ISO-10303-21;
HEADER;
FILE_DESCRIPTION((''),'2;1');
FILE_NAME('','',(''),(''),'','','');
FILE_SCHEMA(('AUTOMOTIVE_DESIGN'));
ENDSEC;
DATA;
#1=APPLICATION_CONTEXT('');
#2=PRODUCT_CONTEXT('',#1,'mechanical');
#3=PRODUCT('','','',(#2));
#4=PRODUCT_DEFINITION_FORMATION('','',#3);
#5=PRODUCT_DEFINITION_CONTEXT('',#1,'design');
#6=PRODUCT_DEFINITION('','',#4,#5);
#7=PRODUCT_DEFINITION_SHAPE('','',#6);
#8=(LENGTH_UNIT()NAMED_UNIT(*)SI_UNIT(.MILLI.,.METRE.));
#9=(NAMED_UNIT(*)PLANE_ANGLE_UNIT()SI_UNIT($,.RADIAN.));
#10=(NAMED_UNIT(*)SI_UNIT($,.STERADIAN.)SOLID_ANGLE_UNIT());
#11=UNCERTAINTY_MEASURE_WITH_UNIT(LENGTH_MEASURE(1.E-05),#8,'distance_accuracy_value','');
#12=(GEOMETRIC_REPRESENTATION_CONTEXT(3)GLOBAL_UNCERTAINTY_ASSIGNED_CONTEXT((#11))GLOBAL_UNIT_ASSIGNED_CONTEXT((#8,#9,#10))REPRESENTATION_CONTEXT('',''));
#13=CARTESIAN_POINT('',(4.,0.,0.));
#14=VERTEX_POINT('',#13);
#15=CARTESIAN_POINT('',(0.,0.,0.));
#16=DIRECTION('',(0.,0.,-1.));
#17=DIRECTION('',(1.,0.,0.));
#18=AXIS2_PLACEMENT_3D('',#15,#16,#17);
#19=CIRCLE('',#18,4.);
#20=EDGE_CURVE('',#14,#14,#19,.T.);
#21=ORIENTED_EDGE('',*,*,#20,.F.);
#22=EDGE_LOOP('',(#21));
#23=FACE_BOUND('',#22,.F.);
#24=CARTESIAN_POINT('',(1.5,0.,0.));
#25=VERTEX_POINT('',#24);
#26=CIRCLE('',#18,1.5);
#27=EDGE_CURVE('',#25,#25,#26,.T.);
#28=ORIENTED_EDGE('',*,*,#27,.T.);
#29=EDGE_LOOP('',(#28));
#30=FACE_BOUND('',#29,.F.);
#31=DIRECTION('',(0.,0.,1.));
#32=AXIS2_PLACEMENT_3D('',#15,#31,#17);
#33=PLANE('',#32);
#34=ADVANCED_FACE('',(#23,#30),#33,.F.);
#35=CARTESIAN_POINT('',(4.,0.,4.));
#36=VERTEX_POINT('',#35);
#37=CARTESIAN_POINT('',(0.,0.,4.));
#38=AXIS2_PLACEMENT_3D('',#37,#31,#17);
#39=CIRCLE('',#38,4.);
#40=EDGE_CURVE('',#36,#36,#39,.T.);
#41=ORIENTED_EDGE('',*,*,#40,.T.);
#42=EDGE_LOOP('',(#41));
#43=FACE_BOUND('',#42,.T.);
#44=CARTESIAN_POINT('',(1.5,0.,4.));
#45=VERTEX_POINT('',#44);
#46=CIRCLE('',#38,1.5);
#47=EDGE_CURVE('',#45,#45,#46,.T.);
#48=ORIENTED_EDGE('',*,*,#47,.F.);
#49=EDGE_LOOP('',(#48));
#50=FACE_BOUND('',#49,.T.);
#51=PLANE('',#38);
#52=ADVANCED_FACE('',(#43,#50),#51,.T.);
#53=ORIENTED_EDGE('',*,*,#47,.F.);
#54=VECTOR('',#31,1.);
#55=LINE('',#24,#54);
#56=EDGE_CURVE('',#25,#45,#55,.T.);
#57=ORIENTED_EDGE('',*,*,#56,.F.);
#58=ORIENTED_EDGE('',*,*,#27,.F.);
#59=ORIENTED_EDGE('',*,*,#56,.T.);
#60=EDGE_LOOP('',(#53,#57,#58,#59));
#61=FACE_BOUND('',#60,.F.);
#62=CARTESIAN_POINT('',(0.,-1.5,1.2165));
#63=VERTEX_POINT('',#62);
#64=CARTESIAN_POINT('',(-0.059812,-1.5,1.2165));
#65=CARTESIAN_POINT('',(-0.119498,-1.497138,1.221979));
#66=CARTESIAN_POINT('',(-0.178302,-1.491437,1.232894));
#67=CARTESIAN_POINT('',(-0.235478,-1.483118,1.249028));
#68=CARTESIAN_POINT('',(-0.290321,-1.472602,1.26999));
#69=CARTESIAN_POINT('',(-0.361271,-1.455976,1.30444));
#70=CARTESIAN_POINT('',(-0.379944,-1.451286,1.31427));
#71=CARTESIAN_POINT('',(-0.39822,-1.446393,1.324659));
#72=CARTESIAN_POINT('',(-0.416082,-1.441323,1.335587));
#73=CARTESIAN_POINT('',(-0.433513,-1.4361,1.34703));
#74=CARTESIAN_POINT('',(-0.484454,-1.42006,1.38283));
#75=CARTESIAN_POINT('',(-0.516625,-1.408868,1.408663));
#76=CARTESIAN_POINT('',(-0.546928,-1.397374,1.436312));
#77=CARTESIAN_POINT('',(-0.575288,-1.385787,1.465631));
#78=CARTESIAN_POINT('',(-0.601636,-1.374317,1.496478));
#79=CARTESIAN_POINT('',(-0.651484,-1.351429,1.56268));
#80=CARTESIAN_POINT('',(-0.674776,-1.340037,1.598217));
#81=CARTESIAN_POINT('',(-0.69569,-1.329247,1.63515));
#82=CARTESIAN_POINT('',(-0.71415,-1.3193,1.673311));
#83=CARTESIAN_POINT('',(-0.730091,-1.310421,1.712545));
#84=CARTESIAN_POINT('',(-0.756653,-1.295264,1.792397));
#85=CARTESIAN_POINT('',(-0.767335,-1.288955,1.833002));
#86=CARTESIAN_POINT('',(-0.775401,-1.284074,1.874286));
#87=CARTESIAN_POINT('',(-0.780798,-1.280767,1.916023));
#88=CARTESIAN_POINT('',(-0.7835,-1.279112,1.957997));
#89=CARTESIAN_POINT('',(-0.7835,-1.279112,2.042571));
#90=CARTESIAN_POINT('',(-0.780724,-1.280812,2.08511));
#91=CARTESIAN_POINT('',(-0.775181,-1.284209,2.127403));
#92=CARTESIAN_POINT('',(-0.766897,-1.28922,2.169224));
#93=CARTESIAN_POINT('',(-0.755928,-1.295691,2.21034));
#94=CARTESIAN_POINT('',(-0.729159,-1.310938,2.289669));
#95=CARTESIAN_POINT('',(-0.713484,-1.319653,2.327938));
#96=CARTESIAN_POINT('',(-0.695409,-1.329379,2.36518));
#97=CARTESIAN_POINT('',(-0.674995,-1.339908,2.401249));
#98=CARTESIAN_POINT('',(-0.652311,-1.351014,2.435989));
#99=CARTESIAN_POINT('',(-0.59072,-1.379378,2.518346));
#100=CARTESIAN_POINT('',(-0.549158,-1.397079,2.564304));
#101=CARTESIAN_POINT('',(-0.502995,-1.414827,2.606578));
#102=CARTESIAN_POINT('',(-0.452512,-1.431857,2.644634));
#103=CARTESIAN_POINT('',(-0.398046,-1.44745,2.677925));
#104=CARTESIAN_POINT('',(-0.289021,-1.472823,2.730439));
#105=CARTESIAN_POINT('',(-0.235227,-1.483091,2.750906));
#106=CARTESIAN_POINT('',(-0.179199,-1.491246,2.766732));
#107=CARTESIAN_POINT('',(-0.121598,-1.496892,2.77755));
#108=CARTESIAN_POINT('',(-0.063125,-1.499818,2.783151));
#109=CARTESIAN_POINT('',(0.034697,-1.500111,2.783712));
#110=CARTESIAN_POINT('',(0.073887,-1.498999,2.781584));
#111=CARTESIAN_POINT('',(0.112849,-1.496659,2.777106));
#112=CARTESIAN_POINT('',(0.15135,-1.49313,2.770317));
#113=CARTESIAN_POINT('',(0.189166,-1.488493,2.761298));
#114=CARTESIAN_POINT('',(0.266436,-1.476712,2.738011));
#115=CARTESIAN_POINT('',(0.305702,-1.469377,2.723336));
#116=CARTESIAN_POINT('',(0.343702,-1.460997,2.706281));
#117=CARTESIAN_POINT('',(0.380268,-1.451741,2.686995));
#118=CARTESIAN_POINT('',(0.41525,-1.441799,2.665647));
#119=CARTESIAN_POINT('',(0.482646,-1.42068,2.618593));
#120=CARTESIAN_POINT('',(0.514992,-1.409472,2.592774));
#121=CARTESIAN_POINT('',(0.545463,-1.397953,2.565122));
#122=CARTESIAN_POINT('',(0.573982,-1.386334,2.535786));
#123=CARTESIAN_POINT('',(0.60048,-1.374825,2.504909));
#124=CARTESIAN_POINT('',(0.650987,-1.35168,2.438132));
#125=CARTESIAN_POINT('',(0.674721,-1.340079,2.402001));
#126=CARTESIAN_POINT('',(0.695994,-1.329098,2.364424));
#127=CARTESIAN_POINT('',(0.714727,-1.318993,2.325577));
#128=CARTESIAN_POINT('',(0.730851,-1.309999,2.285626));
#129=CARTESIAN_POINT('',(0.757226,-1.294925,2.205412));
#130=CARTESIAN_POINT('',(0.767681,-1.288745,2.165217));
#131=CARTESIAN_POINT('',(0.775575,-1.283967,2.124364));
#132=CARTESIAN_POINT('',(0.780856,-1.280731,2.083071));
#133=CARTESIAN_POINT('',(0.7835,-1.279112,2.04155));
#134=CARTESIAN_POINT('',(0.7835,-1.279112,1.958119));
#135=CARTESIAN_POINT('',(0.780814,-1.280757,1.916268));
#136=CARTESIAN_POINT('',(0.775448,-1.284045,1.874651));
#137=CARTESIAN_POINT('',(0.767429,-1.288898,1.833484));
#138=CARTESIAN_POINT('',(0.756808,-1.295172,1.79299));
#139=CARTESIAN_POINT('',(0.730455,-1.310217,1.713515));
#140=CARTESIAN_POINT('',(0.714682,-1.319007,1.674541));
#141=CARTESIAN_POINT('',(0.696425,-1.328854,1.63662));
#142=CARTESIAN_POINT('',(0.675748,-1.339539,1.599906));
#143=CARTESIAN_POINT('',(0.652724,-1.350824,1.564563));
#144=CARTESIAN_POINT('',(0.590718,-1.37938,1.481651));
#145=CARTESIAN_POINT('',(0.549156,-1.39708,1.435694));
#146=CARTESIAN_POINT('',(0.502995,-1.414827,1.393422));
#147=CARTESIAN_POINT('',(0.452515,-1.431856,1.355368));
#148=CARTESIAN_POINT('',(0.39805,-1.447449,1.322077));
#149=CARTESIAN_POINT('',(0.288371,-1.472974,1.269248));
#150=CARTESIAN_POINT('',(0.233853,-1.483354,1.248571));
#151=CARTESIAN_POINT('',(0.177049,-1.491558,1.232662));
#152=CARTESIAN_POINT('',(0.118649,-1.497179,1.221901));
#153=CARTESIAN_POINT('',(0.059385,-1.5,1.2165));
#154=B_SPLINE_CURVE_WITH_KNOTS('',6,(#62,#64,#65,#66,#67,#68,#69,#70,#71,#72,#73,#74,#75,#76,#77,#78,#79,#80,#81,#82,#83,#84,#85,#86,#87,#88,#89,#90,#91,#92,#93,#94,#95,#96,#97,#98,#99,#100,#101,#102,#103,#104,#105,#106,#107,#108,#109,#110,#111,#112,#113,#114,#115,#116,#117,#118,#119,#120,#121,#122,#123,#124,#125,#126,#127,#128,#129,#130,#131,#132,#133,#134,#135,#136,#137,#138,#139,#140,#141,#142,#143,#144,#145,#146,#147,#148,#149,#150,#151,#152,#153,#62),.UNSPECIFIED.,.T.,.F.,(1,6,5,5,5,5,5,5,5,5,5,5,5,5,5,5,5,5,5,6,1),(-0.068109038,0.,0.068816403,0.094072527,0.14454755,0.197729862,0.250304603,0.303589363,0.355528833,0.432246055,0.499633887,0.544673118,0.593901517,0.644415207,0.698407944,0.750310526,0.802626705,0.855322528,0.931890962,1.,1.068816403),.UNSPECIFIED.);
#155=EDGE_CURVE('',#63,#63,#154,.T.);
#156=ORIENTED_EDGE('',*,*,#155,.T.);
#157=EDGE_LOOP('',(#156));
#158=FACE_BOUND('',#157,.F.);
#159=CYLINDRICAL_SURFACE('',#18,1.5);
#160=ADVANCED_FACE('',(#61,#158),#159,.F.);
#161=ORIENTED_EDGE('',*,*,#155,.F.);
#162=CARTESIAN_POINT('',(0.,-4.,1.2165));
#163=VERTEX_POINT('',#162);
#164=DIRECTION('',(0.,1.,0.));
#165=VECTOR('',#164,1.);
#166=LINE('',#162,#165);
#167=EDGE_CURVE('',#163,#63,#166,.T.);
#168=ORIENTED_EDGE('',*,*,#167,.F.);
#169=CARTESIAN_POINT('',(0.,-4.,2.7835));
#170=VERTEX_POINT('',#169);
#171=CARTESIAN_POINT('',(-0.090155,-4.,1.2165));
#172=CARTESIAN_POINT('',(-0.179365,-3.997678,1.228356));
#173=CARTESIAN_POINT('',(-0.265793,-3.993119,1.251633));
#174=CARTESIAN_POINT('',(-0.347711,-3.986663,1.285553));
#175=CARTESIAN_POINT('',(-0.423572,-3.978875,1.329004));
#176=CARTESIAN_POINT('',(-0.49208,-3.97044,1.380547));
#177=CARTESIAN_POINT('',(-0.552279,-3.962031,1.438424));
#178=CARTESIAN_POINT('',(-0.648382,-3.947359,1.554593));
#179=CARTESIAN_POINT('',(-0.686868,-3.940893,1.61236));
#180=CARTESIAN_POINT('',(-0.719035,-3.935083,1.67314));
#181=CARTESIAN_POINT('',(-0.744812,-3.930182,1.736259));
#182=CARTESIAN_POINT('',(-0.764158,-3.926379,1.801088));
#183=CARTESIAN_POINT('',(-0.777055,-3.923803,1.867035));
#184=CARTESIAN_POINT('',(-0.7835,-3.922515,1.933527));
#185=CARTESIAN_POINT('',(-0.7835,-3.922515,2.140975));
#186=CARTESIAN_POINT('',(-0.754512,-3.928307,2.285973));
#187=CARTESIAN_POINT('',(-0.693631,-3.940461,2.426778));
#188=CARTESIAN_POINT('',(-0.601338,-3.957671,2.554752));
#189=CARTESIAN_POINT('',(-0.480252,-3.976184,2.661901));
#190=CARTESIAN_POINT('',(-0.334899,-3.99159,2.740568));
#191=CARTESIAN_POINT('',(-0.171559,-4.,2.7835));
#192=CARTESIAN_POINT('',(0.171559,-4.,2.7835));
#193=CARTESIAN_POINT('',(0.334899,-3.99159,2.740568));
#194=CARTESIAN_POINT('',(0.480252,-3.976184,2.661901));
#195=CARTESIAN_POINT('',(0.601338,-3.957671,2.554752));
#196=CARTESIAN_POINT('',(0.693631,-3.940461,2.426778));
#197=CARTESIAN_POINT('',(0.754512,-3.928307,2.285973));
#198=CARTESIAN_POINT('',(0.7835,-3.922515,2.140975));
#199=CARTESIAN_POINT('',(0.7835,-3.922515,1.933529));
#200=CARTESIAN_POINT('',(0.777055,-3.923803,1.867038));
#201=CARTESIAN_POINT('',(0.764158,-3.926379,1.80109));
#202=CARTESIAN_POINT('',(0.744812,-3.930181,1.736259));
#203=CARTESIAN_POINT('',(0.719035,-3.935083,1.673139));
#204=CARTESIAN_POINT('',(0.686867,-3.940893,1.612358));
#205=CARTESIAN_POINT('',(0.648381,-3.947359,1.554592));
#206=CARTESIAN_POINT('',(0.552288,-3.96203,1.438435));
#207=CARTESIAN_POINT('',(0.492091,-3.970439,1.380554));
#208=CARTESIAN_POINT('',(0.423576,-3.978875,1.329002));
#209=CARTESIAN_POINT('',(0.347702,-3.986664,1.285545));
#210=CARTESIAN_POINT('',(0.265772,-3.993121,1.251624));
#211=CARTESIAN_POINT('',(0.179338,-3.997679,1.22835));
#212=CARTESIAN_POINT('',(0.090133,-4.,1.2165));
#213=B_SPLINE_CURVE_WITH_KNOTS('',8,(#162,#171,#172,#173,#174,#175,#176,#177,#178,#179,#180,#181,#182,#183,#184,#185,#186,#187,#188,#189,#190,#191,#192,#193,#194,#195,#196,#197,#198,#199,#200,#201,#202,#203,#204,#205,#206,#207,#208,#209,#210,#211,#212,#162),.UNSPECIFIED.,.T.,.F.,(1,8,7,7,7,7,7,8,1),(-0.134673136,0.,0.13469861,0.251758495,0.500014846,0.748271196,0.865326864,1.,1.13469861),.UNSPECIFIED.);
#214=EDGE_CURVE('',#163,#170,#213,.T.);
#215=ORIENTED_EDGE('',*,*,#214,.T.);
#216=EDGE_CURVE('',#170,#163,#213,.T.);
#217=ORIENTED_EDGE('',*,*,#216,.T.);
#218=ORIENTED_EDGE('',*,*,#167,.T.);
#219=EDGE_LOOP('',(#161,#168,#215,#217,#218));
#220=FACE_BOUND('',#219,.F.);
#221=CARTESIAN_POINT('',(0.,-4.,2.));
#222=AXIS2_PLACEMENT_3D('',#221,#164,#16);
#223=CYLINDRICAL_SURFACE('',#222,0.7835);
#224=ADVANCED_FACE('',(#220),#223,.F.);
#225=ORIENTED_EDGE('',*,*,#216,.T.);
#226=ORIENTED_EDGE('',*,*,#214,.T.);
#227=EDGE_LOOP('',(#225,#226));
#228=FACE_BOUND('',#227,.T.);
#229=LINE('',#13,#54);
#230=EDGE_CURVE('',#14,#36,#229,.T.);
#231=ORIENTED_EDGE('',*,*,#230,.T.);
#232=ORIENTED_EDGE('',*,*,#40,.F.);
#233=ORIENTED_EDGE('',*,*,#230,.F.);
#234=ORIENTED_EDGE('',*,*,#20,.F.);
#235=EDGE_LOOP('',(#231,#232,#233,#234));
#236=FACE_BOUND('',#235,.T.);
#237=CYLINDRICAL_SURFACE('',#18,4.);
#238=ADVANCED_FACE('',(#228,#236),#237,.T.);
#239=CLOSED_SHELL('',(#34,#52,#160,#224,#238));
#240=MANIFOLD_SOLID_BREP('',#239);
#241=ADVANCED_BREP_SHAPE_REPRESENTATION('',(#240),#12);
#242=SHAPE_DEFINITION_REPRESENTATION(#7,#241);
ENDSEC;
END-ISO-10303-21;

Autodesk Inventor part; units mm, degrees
ref_plane "YZ Plane" through (0, 0, 0) normal (1, 0, 0) x (0, 1, 0)
ref_plane "XY Plane" through (0, 0, 0) normal (0, 0, 1) x (1, 0, 0)
sketch "Skizze1" plane through (0, 0, 0) normal (0, 0, 1) x (1, 0, 0)
  line L0 (-5.6, 0) -> (5.6, 0) projected
  line L1 (0, -5.6) -> (0, 5.6) projected
  circle A0 centre (0, 0) radius 1.5
  circle A1 centre (0, 0) radius 4
  dimension "d0" = 3
  dimension "d1" = 8
extrude "Extrusion1" add sketch "Skizze1" along normal blind 4 contours A0 L1 A1 L0 | L0 A1 L1 A0 | A0 L0 A1 L1 | L1 A1 L0 A0
ref_plane "Arbeitsebene1" through (0, -4, 0) normal (0, 1, 0) x (-1, 0, 0)
sketch "Skizze2" plane through (0, -4, 0) normal (0, 1, 0) x (-1, 0, 0)
  line L0 (0, -0.8) -> (0, 4.8) projected
  line L1 (5.6, 0) -> (-5.6, 0) projected
  point P0 (0, 0)
  point P1 (0, 2)
  dimension "d4" = 2
hole "Bohrung1" at (0, -4, 2) direction (0, 1, 0) diameter 1.567 end up to surface thread size "M2x0.4" class "6H" standard "ISO Metric profile"
properties part number "13_1087_022"
